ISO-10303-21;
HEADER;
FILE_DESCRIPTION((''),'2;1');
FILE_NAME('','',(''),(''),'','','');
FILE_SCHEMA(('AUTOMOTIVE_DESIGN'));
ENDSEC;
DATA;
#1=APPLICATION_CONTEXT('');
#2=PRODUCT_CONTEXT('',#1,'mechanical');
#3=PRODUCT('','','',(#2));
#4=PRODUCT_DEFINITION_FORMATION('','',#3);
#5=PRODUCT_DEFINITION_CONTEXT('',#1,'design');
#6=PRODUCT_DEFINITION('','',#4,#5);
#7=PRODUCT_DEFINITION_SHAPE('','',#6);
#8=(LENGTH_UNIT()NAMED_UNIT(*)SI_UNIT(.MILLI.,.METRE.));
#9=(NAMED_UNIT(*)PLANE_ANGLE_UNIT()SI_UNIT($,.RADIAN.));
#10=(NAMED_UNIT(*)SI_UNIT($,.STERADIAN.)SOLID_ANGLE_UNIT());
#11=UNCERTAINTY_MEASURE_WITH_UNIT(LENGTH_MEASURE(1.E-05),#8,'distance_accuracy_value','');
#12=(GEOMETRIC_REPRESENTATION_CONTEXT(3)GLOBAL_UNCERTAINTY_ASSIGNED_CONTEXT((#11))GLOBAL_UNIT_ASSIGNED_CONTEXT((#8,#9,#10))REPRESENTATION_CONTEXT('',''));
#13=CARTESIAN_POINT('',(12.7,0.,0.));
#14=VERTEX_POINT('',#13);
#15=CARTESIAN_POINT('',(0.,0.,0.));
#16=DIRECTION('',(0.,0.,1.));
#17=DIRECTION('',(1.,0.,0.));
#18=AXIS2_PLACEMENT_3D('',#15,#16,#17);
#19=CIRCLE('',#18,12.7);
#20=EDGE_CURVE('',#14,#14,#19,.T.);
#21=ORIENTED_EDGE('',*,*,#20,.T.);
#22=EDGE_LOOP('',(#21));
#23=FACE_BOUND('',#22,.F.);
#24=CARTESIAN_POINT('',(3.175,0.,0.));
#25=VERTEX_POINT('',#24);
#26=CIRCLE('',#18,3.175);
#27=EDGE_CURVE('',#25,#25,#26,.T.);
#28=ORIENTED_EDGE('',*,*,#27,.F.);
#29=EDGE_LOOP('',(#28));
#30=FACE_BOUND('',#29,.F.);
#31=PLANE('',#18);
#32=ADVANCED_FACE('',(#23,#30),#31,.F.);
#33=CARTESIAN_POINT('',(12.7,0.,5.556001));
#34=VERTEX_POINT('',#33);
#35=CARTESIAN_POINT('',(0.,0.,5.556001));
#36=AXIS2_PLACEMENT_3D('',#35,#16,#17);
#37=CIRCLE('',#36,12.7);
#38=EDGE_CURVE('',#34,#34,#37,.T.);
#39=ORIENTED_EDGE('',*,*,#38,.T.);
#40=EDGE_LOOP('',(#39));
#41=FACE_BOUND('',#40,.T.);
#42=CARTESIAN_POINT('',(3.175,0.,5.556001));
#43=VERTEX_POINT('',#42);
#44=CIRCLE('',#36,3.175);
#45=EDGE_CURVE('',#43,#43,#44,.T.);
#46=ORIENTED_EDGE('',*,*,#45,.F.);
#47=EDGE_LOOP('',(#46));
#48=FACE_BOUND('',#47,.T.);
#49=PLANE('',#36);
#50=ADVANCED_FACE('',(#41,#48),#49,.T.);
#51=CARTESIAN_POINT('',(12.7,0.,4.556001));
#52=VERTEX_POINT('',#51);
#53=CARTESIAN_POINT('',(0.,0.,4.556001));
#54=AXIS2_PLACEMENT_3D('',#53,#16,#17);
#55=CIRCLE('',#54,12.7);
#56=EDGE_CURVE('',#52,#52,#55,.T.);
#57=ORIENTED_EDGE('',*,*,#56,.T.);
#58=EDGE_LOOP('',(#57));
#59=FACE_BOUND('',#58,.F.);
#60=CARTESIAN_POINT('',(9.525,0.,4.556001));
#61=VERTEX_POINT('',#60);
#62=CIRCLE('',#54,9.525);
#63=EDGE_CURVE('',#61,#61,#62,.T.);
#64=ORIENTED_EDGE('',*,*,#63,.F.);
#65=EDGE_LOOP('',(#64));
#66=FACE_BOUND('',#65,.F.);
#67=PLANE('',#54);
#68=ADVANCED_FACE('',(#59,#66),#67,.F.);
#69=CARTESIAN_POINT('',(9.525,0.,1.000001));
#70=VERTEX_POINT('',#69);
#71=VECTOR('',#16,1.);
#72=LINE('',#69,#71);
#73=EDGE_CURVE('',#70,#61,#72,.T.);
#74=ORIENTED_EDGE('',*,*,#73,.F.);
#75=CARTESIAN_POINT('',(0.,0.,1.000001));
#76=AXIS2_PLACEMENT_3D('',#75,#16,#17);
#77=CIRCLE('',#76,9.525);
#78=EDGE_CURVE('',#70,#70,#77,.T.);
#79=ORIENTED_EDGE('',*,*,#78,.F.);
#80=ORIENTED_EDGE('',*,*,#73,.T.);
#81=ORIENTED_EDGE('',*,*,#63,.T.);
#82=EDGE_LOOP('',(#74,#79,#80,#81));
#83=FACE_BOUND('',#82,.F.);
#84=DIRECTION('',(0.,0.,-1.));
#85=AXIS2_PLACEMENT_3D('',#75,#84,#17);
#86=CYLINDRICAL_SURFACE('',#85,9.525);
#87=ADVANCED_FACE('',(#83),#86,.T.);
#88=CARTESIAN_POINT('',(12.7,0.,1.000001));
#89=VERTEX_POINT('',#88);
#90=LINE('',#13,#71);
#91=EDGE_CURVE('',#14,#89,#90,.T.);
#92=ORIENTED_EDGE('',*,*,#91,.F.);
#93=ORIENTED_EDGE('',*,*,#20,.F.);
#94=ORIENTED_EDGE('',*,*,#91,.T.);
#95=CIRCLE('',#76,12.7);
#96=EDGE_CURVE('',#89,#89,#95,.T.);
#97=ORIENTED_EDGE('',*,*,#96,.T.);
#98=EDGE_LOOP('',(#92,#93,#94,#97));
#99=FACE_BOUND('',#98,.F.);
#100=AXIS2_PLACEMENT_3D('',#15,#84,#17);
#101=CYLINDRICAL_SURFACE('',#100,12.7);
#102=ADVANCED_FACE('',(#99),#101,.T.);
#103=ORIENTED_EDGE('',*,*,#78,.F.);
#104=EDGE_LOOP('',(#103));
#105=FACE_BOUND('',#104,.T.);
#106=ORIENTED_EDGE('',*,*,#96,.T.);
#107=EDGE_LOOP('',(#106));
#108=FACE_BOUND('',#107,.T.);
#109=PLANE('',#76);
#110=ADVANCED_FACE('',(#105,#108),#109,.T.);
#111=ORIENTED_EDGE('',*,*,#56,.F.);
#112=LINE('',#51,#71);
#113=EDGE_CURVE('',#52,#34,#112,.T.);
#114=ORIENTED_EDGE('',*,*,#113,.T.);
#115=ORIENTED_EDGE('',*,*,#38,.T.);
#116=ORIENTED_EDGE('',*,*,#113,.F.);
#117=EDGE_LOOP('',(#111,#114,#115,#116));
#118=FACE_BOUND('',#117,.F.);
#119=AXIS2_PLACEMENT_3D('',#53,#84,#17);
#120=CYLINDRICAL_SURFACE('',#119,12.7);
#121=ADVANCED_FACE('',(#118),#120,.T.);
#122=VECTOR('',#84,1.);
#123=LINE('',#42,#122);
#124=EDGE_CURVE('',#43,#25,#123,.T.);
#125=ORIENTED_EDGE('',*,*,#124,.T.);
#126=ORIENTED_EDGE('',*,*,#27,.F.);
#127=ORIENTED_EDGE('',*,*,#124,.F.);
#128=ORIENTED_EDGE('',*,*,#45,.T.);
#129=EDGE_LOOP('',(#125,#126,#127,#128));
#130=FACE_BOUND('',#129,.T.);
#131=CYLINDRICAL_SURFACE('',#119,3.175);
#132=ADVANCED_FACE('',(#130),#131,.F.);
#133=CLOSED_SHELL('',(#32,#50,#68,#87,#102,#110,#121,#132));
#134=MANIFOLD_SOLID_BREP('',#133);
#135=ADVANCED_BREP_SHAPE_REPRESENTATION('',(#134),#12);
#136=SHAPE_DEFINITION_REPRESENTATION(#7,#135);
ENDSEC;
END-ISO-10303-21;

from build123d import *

# Parameters (mm, degrees)
F0_R     = 12.7
F0_R_2   = 3.175
F1_DEPTH = 1.00000054
F2_R     = 9.525
F2_R_2   = 3.175
F3_DEPTH = 3.556
F4_R     = 12.7
F4_R_2   = 9.525
F4_R_3   = 3.175
F5_DEPTH = 1.00000054


# Not quite as in the source:
# - a feature names something its author has since deleted; it is built from what else it names


with BuildPart() as f1:
    # F0 (on Top) → F1 (new body)
    with BuildSketch(Plane.XY):
        Circle(F0_R)
        Circle(F0_R_2, mode=Mode.SUBTRACT)
    extrude(amount=F1_DEPTH)

    # F2 (on face) → F3 (join)
    with BuildSketch(Plane.XY.offset(1.00000054)):
        Circle(F2_R)
        Circle(F2_R_2, mode=Mode.SUBTRACT)
    extrude(amount=F3_DEPTH)

    # F4 (on face) → F5 (join)
    with BuildSketch(Plane.XY.offset(4.55600054)):
        Circle(F4_R)
        Circle(F4_R_2, mode=Mode.SUBTRACT)
        Circle(F4_R_2)
        Circle(F4_R_3, mode=Mode.SUBTRACT)
    extrude(amount=F5_DEPTH)


solid = f1.part
